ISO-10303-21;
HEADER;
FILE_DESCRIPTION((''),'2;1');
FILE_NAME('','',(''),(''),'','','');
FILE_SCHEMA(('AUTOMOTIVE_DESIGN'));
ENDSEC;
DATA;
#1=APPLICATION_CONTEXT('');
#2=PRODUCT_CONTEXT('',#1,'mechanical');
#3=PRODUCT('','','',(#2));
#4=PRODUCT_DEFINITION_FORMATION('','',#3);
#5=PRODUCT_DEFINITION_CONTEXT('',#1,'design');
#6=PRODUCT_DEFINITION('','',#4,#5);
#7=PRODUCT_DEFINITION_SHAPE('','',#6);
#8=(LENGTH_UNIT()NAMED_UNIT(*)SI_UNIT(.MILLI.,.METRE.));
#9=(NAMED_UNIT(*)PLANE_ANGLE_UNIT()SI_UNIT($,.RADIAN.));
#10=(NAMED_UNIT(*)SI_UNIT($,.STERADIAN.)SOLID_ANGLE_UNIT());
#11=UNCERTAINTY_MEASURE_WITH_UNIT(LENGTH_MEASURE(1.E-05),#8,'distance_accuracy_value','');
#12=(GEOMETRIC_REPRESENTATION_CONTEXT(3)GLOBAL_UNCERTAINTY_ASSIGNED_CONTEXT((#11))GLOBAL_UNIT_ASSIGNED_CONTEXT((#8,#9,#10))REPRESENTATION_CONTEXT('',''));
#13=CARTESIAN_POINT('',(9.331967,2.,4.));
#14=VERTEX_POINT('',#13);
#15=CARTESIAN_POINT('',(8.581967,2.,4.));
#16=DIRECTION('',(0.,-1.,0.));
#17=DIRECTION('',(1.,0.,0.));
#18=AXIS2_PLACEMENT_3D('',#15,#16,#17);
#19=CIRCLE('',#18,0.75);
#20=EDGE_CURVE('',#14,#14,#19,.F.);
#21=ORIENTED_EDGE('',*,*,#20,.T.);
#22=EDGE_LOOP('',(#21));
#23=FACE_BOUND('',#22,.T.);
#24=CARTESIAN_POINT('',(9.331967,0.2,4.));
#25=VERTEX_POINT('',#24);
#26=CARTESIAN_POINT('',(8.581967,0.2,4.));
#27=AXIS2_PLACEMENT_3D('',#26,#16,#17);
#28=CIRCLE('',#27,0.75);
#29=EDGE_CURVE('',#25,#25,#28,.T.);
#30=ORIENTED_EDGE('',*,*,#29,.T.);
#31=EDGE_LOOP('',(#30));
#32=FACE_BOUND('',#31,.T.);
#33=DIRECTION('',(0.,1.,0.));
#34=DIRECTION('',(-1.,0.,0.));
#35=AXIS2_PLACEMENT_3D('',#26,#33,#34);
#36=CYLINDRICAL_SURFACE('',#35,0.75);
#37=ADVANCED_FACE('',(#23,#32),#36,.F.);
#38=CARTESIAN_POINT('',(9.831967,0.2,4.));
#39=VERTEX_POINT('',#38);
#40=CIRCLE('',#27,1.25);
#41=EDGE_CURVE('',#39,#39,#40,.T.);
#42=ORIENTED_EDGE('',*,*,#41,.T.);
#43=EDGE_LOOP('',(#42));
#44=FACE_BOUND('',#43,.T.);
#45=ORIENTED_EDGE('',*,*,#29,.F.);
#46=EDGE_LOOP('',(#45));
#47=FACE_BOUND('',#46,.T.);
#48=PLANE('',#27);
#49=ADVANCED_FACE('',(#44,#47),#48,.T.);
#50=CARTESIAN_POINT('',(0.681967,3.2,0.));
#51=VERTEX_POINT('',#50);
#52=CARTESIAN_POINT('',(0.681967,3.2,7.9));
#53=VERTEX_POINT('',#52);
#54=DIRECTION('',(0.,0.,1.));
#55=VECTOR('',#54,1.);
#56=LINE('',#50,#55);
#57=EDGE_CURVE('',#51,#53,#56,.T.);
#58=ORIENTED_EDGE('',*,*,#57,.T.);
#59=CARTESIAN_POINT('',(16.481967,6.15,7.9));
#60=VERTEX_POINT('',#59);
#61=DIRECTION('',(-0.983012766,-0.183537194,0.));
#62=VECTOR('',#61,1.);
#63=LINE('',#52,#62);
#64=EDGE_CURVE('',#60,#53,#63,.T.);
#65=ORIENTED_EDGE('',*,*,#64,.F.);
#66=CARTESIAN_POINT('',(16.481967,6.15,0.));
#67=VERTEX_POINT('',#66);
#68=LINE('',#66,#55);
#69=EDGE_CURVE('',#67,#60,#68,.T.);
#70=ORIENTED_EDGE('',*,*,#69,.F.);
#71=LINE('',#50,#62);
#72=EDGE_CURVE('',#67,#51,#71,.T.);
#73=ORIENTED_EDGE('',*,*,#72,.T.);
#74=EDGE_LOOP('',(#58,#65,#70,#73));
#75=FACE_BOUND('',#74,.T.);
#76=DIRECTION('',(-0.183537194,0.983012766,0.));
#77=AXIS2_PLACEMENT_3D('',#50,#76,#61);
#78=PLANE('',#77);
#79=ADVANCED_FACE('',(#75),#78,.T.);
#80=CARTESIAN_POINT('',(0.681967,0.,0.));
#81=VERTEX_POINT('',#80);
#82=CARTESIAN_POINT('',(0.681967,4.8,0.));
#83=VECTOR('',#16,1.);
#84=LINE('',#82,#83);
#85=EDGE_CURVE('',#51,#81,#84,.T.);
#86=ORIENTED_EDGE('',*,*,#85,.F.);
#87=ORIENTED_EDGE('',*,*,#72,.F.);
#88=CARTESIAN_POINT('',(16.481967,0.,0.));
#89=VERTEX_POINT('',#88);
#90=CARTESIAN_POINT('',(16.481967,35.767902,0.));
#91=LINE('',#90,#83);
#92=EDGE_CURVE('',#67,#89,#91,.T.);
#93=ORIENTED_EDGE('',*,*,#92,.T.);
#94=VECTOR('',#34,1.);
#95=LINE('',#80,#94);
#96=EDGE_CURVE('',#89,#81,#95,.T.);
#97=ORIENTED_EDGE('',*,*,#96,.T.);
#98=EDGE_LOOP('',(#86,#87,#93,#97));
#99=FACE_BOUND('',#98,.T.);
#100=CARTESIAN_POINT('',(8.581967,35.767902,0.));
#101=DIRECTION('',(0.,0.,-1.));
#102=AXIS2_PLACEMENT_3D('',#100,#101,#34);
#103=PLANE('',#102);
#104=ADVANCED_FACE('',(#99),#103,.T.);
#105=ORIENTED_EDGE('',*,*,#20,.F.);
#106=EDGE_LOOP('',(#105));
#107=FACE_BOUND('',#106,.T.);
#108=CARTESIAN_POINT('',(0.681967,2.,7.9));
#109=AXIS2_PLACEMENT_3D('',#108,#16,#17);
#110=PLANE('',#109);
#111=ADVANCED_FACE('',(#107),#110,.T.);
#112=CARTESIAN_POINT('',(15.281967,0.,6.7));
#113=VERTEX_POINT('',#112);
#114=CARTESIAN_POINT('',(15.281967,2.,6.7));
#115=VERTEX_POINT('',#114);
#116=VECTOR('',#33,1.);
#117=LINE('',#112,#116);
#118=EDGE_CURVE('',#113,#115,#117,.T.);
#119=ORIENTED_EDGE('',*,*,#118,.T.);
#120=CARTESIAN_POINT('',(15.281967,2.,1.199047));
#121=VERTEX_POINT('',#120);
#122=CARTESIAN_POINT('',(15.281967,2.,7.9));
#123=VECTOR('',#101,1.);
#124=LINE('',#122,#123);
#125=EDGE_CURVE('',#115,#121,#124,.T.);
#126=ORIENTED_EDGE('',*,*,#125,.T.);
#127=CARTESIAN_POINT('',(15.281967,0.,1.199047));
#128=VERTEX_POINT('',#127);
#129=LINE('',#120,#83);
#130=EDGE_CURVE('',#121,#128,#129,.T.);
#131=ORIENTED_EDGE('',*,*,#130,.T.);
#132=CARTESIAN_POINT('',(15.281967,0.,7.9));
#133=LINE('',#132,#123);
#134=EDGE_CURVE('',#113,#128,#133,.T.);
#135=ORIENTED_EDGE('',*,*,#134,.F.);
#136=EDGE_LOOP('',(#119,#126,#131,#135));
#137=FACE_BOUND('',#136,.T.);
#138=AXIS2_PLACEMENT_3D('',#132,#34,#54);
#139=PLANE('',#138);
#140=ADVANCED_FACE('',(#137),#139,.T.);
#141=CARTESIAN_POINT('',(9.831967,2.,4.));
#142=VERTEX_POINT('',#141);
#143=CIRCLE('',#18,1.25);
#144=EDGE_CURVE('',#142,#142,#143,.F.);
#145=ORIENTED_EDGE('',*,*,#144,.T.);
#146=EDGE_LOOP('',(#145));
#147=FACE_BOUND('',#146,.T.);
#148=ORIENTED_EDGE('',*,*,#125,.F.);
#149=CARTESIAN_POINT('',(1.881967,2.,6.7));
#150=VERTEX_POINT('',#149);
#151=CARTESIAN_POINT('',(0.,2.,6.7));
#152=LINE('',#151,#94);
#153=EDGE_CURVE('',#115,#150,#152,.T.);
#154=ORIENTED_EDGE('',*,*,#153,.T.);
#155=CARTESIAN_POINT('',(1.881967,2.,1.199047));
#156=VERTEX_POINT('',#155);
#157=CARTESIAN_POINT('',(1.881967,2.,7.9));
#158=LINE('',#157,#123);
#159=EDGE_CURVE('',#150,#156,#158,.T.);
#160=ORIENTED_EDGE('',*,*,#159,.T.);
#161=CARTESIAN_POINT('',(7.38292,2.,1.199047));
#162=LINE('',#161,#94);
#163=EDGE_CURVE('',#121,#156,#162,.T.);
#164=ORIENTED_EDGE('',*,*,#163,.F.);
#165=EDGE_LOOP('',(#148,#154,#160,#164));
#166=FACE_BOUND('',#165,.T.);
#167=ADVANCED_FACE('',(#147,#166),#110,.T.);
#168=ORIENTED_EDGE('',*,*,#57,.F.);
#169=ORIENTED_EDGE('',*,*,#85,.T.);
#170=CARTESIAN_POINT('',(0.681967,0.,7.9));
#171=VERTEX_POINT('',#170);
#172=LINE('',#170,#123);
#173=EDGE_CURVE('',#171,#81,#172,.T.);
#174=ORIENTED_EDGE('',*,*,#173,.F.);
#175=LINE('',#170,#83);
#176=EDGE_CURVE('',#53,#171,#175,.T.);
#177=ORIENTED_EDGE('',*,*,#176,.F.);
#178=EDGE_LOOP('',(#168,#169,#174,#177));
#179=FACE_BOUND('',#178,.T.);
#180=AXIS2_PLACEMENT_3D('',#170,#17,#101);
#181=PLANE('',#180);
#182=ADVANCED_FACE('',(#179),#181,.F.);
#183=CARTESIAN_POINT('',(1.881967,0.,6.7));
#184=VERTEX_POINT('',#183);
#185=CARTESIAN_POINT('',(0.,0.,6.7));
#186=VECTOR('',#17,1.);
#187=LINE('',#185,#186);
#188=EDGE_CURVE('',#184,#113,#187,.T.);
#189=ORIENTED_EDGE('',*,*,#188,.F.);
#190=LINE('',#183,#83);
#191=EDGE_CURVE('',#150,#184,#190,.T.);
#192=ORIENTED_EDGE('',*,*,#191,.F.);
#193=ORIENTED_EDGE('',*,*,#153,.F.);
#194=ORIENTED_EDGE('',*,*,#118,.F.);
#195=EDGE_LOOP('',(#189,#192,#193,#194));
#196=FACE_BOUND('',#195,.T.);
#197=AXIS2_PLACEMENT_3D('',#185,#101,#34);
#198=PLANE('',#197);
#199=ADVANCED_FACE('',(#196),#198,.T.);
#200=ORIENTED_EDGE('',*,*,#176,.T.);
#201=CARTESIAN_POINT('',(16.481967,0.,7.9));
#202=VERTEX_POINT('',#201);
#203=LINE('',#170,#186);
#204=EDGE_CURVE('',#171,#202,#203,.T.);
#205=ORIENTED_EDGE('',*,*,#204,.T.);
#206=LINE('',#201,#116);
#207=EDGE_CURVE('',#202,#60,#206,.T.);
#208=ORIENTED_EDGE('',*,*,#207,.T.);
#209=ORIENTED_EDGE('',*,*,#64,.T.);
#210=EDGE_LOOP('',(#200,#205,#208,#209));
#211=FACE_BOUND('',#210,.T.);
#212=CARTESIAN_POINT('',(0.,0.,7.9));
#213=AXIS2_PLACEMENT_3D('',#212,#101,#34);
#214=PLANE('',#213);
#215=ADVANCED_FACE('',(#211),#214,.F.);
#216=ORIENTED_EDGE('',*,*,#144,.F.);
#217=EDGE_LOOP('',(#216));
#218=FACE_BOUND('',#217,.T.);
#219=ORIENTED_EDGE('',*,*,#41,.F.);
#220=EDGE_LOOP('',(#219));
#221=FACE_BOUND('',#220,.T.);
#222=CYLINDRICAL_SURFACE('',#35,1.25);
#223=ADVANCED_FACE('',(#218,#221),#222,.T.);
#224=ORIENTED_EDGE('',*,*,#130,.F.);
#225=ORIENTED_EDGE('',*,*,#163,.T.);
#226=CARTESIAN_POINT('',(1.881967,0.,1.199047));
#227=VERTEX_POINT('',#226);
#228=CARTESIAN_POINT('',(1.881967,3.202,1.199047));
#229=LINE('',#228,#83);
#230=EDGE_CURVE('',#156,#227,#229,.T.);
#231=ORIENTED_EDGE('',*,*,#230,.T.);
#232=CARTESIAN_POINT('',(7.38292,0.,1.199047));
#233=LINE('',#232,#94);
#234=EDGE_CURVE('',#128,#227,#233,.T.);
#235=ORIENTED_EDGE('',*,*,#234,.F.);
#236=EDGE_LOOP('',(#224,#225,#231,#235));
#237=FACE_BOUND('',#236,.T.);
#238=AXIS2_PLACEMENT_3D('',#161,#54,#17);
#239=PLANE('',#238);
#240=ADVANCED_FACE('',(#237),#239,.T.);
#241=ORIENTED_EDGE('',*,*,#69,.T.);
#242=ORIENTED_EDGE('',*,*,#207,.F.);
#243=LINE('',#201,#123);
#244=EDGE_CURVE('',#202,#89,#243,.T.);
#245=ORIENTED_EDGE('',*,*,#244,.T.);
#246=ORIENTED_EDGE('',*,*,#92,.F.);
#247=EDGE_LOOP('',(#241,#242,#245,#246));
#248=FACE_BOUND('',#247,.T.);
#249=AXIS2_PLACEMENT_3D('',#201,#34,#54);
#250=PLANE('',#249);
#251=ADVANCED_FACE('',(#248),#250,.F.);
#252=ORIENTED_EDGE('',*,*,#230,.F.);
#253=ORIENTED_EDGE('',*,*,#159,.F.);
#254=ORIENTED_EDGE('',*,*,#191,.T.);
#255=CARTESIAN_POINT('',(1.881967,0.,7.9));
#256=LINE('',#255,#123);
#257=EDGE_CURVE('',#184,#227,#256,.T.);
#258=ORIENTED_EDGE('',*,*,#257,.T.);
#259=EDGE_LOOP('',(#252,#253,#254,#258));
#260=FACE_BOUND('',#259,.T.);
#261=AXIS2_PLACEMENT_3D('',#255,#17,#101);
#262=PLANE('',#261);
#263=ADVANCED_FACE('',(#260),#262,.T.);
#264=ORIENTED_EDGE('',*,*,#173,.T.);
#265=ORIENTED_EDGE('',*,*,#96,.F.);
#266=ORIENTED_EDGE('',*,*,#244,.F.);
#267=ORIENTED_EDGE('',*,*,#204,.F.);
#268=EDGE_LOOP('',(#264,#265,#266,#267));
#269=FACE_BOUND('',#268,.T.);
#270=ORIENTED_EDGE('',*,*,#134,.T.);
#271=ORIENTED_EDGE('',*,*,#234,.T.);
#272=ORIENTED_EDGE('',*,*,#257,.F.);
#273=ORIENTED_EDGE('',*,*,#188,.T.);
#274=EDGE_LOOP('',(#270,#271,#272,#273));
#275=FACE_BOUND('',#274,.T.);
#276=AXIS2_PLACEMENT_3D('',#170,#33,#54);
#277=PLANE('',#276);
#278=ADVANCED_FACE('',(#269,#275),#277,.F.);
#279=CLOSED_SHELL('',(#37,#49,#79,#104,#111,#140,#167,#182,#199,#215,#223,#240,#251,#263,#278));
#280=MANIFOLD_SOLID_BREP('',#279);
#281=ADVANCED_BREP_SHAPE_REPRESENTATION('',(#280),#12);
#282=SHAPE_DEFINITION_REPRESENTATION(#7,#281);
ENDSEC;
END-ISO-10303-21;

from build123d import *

# Parameters (mm, degrees)
MAINBASESKETCH_W          = 15.8
MAINBASESKETCH_H          = 3.2
MAINBASEEXTRUDE_DEPTH     = 7.9
STUDSSKETCH_R             = 2.4
STUDSEXTRUDE_DEPTH        = 1.6
MAINBASESHELL_T           = -1.2
LCUTBLUE_DEPTH            = 19.555463972
LCUTBLUE_DEPTH_BACK       = 19.555463972
CUTADDEDTOLCUT_DEPTH      = 2
MADESLIMCUTSKETCH_W       = 7.9
MADESLIMCUTSKETCH_H       = 7.9
MADESLIMCUT_DEPTH         = 19.897228453
MADESLIMFILLEXT_REACH     = 20.555
SKETCH33_W                = 5.500952983
SKETCH33_H                = 1.199047018
SLIMHOLEEXT_START         = -0.2
SLIMHOLESKETCH_R          = 1.25
SLIMHOLESKETCH_R_2        = 0.75
SLIMHOLEEXT_DEPTH         = 2
ANGLEDSLIMBASECUT_DEPTH   = 19.555463972
ANGLEDSLIMBASESWEEP_DEPTH = 7.9


# Read off the part's stored shape, not the designer's step: AngledSlimBaseSweep
with BuildPart() as part:
    # MainBaseSketch → MainBaseExtrude (new, symmetric)
    with BuildSketch(Plane.XY):
        with Locations((8.581967213, 1.6)):
            Rectangle(MAINBASESKETCH_W, MAINBASESKETCH_H)
    extrude(amount=MAINBASEEXTRUDE_DEPTH, both=True)

    # StudsSketch → StudsExtrude (add)
    with BuildSketch(Plane(origin=(0, 3.2, 0), x_dir=(1, 0, 0), z_dir=(0, 1, 0))):
        with Locations((4.581967213, 4)):
            Circle(STUDSSKETCH_R)
    extrude(amount=STUDSEXTRUDE_DEPTH)

    # MainBaseShell
    mainbaseshell_openings = [part.faces().sort_by_distance(p)[0] for p in [
        (8.581967213, 0, 0),
    ]]
    offset(amount=MAINBASESHELL_T, openings=mainbaseshell_openings, kind=Kind.INTERSECTION)

    # LCUTBlueSketch → LCutBlue (cut, two sides: drawn at the far end of the back side and taken through both)
    with BuildSketch(Plane(origin=(0, 3.2, 0), x_dir=(1, 0, 0), z_dir=(0, 1, 0)).offset(-LCUTBLUE_DEPTH_BACK)):
        Polygon((8.581967213, 53.229874044), (8.581967213, 7.9), (8.581967213, 0), (16.481967213, 0), (61.811841258, 0), (125.917963912, 64.106122654), (72.688089868, 117.335996699), align=None)
    extrude(amount=LCUTBLUE_DEPTH + LCUTBLUE_DEPTH_BACK, mode=Mode.SUBTRACT)

    # CutAddedtoLSketch → CutAddedToLCut (add)
    with BuildSketch(Plane.XZ):
        Polygon((7.382920196, -6.7), (8.581967213, -6.7), (8.581967213, 0), (15.281967213, 0), (15.281967213, 1.199047018), (7.382920196, 1.199047018), (7.382920196, 0), align=None)
    extrude(amount=-CUTADDEDTOLCUT_DEPTH)

    # MadeSlimCutSketch → MadeSlimCut (cut, through all)
    with BuildSketch(Plane.XZ):
        with Locations((4.631967213, -3.95)):
            Rectangle(MADESLIMCUTSKETCH_W, MADESLIMCUTSKETCH_H)
    extrude(amount=-MADESLIMCUT_DEPTH, mode=Mode.SUBTRACT)

    # Sketch33 → MadeSlimFillExt (add, up to next)
    with BuildSketch(Plane.XZ, mode=Mode.PRIVATE) as madeslimfillext_sk1:
        with Locations((4.632443704, 0.599523509)):
            Rectangle(SKETCH33_W, SKETCH33_H)
    madeslimfillext_tool1 = extrude(madeslimfillext_sk1.sketch, amount=-MADESLIMFILLEXT_REACH, mode=Mode.PRIVATE) - part.part
    add(madeslimfillext_tool1.solids().sort_by_distance((4.632444, 0, 0.599524))[0])

    # SlimHoleSketch → SlimHoleExt (add)
    with BuildSketch(Plane.XZ.offset(-2).offset(SLIMHOLEEXT_START)):
        with Locations((8.581967213, 4)):
            Circle(SLIMHOLESKETCH_R)
        with Locations((8.581967213, 4)):
            Circle(SLIMHOLESKETCH_R_2, mode=Mode.SUBTRACT)
    extrude(amount=SLIMHOLEEXT_DEPTH)

    # AngledSlimBaseSketch → AngledSlimBaseCut (cut, through all)
    with BuildSketch(Plane.XY.offset(7.9)):
        Polygon((0.681967213, 2.247699421), (16.481967213, 2.247699421), (16.481967213, 6.15), (0.681967213, 3.2), align=None)
    extrude(amount=-ANGLEDSLIMBASECUT_DEPTH, mode=Mode.SUBTRACT)

    # AngledSlimBaseSweep outline → AngledSlimBaseSweep (add)
    with BuildSketch(Plane.XY):
        Polygon((16.481967213, 2.247699421), (16.481967213, 6.15), (0.681967213, 3.2), (0.681967213, 2.247699421), align=None)
    extrude(amount=ANGLEDSLIMBASESWEEP_DEPTH)


solid = part.part
